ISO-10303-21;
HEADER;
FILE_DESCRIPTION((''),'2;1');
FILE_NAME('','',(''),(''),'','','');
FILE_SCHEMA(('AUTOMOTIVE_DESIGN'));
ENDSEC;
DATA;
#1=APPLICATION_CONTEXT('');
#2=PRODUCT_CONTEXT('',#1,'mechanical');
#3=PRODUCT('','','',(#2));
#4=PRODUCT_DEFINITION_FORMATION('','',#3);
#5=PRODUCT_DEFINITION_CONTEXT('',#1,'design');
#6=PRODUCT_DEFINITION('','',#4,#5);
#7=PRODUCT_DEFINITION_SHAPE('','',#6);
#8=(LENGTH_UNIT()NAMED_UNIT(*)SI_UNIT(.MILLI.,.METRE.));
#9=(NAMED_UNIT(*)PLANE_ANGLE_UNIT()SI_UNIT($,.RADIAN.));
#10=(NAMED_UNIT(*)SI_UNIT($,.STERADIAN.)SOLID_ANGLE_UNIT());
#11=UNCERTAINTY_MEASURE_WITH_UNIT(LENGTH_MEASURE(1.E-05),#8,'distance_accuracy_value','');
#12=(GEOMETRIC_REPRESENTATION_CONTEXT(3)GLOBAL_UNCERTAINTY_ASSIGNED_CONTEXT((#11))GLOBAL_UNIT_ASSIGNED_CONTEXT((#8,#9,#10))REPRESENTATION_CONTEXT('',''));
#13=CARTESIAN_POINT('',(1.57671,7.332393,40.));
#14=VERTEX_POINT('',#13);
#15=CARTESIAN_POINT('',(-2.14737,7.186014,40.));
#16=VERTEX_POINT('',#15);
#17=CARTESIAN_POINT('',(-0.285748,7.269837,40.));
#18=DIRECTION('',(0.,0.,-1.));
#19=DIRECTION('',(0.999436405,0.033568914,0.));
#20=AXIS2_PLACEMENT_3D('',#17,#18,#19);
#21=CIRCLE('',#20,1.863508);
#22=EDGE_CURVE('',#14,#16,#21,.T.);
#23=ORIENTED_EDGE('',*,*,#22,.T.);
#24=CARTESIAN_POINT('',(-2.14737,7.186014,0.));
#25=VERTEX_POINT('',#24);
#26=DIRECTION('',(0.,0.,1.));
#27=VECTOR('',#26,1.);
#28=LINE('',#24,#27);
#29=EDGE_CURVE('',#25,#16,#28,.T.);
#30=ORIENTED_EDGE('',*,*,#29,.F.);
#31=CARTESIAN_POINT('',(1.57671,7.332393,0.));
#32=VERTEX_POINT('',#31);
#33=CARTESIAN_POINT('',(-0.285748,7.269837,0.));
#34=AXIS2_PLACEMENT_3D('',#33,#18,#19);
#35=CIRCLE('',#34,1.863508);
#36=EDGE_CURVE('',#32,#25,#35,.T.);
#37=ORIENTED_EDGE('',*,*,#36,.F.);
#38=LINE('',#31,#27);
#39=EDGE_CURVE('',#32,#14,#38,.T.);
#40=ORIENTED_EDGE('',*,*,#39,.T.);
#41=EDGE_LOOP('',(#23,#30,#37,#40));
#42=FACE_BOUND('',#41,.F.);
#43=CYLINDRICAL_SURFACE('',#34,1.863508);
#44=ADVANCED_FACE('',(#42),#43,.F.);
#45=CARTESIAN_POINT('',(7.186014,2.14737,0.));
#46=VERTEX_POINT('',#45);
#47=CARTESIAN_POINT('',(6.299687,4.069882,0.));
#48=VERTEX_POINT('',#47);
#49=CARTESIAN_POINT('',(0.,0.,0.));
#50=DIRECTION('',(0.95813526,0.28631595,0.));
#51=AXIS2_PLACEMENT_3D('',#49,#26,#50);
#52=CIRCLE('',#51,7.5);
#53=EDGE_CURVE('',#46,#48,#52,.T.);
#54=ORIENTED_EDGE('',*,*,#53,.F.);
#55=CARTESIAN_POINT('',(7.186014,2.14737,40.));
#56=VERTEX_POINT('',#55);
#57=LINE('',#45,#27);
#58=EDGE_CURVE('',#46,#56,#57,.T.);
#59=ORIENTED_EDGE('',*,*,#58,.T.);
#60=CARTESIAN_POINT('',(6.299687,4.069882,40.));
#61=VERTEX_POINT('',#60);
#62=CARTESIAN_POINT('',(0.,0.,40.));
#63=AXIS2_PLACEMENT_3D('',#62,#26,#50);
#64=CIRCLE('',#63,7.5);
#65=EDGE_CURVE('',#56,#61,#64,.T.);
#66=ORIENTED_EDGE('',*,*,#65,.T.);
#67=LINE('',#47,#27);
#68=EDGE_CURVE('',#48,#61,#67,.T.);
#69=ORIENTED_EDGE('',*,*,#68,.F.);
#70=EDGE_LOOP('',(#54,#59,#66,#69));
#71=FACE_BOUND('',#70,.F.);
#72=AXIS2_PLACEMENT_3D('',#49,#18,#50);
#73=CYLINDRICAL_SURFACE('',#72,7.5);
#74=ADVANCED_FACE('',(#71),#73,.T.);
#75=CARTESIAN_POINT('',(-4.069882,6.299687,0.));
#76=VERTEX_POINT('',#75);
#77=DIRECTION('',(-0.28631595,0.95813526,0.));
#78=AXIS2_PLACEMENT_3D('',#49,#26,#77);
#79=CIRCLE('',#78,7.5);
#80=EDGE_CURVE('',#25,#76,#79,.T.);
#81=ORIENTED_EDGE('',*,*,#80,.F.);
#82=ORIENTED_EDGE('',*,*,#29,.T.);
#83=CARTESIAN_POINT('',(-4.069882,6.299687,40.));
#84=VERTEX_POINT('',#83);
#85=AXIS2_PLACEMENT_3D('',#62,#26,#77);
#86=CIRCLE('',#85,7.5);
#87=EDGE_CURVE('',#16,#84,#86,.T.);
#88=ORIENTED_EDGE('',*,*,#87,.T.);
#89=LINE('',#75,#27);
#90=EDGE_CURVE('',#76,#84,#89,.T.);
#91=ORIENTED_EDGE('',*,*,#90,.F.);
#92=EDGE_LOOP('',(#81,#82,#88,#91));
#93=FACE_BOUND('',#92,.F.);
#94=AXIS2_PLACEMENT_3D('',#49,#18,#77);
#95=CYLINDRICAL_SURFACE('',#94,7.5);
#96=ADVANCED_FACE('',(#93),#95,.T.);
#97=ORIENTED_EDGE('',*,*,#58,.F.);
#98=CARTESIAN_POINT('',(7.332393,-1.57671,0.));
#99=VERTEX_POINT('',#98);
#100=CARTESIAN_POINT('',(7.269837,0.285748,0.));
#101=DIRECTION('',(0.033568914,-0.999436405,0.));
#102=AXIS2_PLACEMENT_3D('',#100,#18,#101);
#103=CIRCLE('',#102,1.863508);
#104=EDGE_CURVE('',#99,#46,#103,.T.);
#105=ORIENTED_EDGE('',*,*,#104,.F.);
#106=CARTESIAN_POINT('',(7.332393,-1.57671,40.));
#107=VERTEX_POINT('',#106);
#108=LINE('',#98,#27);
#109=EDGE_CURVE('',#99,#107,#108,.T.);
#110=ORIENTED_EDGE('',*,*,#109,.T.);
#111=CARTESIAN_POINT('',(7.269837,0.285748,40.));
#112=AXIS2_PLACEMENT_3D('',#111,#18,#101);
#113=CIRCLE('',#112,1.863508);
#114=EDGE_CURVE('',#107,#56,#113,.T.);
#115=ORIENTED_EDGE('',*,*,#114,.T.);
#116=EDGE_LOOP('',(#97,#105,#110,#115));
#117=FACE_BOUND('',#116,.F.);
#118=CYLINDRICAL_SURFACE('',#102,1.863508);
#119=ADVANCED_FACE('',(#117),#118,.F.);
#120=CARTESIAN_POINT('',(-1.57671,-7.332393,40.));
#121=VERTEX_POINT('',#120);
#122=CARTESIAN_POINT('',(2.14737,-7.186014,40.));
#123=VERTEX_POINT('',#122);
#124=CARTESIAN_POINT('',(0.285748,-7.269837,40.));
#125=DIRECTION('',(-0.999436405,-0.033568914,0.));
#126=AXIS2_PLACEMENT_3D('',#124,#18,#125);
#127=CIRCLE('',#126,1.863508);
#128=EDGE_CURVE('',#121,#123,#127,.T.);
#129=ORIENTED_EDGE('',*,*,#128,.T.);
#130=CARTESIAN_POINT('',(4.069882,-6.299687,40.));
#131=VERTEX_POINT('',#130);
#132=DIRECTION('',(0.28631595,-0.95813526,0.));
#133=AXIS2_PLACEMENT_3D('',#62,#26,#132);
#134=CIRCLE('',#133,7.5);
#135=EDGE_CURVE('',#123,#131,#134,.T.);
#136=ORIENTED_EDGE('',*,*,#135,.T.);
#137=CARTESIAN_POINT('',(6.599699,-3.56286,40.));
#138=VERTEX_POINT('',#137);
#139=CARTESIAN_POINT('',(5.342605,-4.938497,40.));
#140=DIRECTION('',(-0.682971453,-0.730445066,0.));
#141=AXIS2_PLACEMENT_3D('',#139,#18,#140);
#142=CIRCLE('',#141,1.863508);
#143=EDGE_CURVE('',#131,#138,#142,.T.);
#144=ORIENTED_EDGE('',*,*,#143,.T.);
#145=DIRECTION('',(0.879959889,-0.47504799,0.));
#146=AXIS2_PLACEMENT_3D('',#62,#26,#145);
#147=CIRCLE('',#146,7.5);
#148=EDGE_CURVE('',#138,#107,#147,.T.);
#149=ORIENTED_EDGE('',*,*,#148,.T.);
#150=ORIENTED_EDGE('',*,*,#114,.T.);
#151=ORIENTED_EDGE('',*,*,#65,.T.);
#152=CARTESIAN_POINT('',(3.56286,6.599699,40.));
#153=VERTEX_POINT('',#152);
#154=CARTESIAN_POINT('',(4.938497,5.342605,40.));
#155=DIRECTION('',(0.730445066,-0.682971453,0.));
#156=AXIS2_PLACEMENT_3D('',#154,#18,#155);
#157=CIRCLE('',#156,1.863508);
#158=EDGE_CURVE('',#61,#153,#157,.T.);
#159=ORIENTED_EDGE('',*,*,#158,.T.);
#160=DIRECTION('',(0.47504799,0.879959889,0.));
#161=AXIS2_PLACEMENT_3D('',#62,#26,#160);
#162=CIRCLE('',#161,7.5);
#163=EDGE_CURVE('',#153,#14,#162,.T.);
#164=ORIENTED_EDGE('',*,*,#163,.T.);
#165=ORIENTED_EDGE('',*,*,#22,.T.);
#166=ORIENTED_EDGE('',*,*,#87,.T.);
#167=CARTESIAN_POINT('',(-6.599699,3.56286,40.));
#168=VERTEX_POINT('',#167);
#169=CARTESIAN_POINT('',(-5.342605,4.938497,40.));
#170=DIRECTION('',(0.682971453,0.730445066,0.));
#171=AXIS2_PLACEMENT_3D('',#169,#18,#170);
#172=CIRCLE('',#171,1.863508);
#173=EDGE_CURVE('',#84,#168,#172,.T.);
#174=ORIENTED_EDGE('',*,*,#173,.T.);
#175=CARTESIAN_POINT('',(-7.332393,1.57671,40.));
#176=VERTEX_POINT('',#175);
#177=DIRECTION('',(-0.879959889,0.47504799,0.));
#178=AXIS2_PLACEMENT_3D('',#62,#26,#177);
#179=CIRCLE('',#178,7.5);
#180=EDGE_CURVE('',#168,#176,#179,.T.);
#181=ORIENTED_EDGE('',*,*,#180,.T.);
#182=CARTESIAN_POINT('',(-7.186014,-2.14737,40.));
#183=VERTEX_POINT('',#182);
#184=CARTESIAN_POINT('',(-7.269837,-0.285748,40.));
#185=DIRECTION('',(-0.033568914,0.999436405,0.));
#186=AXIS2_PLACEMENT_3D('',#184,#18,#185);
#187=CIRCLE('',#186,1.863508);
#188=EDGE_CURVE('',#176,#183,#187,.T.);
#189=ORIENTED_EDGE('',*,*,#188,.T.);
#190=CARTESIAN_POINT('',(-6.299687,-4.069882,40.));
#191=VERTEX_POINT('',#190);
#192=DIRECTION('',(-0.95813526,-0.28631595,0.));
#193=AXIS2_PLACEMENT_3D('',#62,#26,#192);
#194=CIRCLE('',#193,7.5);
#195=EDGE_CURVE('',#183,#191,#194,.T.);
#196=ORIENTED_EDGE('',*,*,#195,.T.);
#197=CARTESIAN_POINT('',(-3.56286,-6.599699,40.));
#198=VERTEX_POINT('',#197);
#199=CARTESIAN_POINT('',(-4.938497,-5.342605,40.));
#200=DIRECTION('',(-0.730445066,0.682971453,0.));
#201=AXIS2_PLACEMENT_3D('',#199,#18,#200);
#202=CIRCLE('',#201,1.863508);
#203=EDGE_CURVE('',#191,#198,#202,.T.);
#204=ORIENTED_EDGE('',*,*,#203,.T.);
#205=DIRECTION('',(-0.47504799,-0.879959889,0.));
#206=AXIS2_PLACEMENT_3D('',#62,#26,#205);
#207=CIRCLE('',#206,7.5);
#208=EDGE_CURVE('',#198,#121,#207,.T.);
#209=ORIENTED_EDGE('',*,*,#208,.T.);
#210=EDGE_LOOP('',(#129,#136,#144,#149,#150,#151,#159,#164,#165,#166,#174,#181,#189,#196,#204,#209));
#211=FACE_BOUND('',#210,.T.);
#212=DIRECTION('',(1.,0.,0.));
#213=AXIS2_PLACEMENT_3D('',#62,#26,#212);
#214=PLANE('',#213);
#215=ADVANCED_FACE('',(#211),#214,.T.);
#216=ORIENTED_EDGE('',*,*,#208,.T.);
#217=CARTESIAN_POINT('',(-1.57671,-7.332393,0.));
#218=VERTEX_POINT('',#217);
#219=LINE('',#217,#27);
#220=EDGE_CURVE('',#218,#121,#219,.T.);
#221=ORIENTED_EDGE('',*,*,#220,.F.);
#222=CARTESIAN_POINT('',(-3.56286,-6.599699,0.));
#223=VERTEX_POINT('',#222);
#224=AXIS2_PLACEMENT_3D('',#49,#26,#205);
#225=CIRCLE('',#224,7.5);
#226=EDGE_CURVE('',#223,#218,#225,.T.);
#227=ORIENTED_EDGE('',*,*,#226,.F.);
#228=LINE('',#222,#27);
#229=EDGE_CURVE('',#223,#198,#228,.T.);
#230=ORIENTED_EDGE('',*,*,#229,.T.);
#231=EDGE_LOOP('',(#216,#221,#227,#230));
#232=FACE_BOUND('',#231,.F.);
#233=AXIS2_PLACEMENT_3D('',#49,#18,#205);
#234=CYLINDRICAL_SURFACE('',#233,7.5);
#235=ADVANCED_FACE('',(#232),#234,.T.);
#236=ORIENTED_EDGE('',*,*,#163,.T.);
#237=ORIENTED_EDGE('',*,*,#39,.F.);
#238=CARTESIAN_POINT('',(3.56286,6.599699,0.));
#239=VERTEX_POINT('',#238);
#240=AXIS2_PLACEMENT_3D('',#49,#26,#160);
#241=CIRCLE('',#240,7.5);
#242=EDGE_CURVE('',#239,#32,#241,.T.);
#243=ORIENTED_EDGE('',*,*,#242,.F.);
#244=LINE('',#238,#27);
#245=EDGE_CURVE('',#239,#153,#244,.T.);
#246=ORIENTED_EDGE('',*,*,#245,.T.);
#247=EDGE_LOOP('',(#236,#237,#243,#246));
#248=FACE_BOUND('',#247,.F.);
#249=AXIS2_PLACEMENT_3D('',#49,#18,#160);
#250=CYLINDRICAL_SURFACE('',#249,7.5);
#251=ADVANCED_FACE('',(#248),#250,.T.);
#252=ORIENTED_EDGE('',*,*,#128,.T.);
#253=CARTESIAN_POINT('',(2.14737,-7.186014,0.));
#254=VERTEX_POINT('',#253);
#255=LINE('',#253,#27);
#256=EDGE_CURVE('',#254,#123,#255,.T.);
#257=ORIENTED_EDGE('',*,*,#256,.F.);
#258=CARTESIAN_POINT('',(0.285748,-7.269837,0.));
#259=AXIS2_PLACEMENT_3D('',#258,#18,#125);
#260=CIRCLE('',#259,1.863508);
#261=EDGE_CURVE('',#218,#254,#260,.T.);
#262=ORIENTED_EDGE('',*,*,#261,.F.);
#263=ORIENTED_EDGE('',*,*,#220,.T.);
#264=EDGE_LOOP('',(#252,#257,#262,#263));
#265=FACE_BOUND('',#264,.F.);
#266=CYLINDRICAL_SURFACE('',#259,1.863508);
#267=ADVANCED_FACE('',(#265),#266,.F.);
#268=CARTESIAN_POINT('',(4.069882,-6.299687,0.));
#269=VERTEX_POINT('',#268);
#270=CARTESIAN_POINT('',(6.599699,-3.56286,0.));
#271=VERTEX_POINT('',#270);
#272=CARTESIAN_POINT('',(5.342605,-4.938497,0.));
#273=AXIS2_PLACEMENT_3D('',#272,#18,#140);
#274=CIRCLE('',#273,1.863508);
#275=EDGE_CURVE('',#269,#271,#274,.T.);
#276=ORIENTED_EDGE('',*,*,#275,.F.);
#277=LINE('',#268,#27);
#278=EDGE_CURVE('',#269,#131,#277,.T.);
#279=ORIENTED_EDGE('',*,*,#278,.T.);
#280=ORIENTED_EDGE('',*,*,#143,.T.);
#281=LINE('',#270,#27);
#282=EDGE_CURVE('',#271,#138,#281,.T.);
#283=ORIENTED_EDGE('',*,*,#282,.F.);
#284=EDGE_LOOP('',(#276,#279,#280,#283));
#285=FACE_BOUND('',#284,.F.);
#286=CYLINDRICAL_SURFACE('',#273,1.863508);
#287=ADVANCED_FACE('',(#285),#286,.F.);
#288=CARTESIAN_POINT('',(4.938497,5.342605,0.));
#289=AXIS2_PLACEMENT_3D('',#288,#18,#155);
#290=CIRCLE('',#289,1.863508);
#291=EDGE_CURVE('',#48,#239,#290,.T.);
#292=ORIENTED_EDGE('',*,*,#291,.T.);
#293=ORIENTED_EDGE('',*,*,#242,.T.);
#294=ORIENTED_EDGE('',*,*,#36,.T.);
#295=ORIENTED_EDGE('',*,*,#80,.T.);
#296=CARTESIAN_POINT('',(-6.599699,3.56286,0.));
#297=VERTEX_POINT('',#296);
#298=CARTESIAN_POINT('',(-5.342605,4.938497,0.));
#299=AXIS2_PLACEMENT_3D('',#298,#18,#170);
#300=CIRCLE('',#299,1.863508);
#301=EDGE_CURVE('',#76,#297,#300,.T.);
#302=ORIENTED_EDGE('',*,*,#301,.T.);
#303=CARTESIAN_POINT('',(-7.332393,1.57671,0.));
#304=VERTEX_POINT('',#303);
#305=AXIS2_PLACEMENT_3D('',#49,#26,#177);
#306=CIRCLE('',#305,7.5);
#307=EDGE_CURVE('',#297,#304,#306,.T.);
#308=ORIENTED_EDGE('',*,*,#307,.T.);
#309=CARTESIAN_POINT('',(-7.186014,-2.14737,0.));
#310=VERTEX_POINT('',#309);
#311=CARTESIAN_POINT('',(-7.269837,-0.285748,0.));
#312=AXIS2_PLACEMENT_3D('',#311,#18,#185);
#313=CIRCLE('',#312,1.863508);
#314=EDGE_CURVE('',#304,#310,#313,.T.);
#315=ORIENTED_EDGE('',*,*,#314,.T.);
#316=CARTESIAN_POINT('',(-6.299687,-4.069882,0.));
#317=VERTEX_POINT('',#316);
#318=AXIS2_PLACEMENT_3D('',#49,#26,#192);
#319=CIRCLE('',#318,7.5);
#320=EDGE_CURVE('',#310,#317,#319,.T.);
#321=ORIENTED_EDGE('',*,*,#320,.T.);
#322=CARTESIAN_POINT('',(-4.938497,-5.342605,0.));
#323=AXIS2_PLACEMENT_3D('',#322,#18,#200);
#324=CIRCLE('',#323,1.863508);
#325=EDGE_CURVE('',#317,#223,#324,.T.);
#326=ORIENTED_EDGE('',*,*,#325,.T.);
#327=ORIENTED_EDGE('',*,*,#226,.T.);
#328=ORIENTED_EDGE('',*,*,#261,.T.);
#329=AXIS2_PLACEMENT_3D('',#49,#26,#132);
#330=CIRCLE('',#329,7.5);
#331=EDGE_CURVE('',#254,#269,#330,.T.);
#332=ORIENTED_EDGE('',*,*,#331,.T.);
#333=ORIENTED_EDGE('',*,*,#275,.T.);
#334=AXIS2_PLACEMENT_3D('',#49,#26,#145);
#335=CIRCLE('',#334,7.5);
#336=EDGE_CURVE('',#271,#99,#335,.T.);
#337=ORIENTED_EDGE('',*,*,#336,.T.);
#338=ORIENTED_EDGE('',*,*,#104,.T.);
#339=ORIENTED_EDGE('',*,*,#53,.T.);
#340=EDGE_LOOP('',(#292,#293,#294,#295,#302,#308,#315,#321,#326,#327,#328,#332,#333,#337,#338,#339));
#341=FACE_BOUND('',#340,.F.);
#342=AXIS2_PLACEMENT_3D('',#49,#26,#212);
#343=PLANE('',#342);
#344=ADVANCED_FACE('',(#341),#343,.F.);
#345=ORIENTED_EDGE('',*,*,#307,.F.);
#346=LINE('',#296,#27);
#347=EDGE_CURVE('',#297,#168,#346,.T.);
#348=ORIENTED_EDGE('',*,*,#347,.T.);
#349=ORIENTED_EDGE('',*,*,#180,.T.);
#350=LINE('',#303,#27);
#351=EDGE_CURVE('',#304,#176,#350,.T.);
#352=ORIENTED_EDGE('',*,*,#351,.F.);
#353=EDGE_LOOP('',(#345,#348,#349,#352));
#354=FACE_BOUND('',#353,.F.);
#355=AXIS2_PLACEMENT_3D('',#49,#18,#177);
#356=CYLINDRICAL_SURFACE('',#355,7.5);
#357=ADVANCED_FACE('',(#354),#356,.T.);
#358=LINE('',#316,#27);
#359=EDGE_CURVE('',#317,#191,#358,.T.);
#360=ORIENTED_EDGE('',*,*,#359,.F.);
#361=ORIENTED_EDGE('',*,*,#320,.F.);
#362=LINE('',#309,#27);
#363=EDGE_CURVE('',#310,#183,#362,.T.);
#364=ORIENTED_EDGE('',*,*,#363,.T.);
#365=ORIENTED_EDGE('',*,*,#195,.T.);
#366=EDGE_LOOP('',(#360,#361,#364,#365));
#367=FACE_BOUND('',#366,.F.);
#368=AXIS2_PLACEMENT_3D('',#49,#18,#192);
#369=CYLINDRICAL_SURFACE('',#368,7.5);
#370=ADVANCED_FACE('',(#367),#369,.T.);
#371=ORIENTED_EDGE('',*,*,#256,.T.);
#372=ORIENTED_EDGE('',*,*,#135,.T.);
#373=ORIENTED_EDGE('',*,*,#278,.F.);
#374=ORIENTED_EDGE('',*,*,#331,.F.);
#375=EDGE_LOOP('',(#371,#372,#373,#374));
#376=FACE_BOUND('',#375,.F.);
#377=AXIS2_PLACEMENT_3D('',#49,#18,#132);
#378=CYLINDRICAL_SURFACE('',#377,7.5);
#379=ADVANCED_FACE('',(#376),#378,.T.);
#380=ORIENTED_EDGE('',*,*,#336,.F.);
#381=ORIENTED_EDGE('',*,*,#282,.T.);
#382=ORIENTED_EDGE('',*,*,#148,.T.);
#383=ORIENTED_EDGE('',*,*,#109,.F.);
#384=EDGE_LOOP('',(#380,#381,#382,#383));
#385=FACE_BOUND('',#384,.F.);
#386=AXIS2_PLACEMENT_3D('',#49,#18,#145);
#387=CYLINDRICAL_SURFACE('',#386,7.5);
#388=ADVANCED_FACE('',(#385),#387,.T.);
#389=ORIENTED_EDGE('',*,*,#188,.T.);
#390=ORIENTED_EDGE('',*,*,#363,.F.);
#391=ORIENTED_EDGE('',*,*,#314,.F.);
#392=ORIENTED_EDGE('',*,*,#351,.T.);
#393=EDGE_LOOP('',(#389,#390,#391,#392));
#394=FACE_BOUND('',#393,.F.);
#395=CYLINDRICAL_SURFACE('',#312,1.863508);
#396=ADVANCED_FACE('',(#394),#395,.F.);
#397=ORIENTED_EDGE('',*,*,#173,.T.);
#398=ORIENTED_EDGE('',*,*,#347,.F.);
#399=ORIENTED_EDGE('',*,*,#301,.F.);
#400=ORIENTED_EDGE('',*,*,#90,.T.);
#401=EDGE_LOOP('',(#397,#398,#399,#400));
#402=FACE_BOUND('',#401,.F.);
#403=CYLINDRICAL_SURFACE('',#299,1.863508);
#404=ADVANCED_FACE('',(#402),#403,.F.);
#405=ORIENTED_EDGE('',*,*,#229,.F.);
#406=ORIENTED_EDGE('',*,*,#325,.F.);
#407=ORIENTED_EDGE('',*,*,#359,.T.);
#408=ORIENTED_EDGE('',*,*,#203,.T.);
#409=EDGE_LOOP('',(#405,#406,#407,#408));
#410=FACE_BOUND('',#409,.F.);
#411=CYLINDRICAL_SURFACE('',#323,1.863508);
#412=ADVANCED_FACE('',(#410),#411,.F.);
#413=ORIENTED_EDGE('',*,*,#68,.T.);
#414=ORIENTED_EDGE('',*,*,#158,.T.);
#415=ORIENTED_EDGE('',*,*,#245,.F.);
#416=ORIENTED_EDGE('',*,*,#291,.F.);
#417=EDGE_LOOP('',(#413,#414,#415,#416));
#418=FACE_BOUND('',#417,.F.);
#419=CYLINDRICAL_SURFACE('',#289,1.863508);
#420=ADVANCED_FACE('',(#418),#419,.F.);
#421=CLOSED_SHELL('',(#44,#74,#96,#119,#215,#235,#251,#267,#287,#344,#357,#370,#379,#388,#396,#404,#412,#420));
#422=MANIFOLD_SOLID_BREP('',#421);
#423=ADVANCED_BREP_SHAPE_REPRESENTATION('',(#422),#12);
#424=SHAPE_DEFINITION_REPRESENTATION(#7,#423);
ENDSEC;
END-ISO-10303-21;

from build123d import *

# Parameters (mm, degrees)
F1_DEPTH = 40


with BuildPart() as f1:
    # F0 (on Top) → F1 (new body)
    with BuildSketch(Plane.XY):
        with BuildLine():
            ThreePointArc((7.3323928732, -1.5767101044), (5.4077667076, 0.2125573054), (7.1860144522, 2.1473696218))
            ThreePointArc((7.1860144522, 2.1473696218), (6.8110241928, 3.1400556437), (6.2996871297, 4.0698823162))
            ThreePointArc((6.2996871297, 4.0698823162), (3.673567798, 3.974169222), (3.5628599276, 6.5996991701))
            ThreePointArc((3.5628599276, 6.5996991701), (2.5957667546, 7.0364760325), (1.5767101044, 7.3323928732))
            ThreePointArc((1.5767101044, 7.3323928732), (-0.2125573054, 5.4077667076), (-2.1473696218, 7.1860144522))
            ThreePointArc((-2.1473696218, 7.1860144522), (-3.1400556437, 6.8110241928), (-4.0698823162, 6.2996871297))
            ThreePointArc((-4.0698823162, 6.2996871297), (-3.974169222, 3.673567798), (-6.5996991701, 3.5628599276))
            ThreePointArc((-6.5996991701, 3.5628599276), (-7.0364760325, 2.5957667546), (-7.3323928732, 1.5767101044))
            ThreePointArc((-7.3323928732, 1.5767101044), (-5.4077667076, -0.2125573054), (-7.1860144522, -2.1473696218))
            ThreePointArc((-7.1860144522, -2.1473696218), (-6.8110241928, -3.1400556437), (-6.2996871297, -4.0698823162))
            ThreePointArc((-6.2996871297, -4.0698823162), (-3.673567798, -3.974169222), (-3.5628599276, -6.5996991701))
            ThreePointArc((-3.5628599276, -6.5996991701), (-2.5957667546, -7.0364760325), (-1.5767101044, -7.3323928732))
            ThreePointArc((-1.5767101044, -7.3323928732), (0.2125573054, -5.4077667076), (2.1473696218, -7.1860144522))
            ThreePointArc((2.1473696218, -7.1860144522), (3.1400556437, -6.8110241928), (4.0698823162, -6.2996871297))
            ThreePointArc((4.0698823162, -6.2996871297), (3.974169222, -3.673567798), (6.5996991701, -3.5628599276))
            ThreePointArc((6.5996991701, -3.5628599276), (7.0364760325, -2.5957667546), (7.3323928732, -1.5767101044))
        make_face()
    extrude(amount=F1_DEPTH)


solid = f1.part
